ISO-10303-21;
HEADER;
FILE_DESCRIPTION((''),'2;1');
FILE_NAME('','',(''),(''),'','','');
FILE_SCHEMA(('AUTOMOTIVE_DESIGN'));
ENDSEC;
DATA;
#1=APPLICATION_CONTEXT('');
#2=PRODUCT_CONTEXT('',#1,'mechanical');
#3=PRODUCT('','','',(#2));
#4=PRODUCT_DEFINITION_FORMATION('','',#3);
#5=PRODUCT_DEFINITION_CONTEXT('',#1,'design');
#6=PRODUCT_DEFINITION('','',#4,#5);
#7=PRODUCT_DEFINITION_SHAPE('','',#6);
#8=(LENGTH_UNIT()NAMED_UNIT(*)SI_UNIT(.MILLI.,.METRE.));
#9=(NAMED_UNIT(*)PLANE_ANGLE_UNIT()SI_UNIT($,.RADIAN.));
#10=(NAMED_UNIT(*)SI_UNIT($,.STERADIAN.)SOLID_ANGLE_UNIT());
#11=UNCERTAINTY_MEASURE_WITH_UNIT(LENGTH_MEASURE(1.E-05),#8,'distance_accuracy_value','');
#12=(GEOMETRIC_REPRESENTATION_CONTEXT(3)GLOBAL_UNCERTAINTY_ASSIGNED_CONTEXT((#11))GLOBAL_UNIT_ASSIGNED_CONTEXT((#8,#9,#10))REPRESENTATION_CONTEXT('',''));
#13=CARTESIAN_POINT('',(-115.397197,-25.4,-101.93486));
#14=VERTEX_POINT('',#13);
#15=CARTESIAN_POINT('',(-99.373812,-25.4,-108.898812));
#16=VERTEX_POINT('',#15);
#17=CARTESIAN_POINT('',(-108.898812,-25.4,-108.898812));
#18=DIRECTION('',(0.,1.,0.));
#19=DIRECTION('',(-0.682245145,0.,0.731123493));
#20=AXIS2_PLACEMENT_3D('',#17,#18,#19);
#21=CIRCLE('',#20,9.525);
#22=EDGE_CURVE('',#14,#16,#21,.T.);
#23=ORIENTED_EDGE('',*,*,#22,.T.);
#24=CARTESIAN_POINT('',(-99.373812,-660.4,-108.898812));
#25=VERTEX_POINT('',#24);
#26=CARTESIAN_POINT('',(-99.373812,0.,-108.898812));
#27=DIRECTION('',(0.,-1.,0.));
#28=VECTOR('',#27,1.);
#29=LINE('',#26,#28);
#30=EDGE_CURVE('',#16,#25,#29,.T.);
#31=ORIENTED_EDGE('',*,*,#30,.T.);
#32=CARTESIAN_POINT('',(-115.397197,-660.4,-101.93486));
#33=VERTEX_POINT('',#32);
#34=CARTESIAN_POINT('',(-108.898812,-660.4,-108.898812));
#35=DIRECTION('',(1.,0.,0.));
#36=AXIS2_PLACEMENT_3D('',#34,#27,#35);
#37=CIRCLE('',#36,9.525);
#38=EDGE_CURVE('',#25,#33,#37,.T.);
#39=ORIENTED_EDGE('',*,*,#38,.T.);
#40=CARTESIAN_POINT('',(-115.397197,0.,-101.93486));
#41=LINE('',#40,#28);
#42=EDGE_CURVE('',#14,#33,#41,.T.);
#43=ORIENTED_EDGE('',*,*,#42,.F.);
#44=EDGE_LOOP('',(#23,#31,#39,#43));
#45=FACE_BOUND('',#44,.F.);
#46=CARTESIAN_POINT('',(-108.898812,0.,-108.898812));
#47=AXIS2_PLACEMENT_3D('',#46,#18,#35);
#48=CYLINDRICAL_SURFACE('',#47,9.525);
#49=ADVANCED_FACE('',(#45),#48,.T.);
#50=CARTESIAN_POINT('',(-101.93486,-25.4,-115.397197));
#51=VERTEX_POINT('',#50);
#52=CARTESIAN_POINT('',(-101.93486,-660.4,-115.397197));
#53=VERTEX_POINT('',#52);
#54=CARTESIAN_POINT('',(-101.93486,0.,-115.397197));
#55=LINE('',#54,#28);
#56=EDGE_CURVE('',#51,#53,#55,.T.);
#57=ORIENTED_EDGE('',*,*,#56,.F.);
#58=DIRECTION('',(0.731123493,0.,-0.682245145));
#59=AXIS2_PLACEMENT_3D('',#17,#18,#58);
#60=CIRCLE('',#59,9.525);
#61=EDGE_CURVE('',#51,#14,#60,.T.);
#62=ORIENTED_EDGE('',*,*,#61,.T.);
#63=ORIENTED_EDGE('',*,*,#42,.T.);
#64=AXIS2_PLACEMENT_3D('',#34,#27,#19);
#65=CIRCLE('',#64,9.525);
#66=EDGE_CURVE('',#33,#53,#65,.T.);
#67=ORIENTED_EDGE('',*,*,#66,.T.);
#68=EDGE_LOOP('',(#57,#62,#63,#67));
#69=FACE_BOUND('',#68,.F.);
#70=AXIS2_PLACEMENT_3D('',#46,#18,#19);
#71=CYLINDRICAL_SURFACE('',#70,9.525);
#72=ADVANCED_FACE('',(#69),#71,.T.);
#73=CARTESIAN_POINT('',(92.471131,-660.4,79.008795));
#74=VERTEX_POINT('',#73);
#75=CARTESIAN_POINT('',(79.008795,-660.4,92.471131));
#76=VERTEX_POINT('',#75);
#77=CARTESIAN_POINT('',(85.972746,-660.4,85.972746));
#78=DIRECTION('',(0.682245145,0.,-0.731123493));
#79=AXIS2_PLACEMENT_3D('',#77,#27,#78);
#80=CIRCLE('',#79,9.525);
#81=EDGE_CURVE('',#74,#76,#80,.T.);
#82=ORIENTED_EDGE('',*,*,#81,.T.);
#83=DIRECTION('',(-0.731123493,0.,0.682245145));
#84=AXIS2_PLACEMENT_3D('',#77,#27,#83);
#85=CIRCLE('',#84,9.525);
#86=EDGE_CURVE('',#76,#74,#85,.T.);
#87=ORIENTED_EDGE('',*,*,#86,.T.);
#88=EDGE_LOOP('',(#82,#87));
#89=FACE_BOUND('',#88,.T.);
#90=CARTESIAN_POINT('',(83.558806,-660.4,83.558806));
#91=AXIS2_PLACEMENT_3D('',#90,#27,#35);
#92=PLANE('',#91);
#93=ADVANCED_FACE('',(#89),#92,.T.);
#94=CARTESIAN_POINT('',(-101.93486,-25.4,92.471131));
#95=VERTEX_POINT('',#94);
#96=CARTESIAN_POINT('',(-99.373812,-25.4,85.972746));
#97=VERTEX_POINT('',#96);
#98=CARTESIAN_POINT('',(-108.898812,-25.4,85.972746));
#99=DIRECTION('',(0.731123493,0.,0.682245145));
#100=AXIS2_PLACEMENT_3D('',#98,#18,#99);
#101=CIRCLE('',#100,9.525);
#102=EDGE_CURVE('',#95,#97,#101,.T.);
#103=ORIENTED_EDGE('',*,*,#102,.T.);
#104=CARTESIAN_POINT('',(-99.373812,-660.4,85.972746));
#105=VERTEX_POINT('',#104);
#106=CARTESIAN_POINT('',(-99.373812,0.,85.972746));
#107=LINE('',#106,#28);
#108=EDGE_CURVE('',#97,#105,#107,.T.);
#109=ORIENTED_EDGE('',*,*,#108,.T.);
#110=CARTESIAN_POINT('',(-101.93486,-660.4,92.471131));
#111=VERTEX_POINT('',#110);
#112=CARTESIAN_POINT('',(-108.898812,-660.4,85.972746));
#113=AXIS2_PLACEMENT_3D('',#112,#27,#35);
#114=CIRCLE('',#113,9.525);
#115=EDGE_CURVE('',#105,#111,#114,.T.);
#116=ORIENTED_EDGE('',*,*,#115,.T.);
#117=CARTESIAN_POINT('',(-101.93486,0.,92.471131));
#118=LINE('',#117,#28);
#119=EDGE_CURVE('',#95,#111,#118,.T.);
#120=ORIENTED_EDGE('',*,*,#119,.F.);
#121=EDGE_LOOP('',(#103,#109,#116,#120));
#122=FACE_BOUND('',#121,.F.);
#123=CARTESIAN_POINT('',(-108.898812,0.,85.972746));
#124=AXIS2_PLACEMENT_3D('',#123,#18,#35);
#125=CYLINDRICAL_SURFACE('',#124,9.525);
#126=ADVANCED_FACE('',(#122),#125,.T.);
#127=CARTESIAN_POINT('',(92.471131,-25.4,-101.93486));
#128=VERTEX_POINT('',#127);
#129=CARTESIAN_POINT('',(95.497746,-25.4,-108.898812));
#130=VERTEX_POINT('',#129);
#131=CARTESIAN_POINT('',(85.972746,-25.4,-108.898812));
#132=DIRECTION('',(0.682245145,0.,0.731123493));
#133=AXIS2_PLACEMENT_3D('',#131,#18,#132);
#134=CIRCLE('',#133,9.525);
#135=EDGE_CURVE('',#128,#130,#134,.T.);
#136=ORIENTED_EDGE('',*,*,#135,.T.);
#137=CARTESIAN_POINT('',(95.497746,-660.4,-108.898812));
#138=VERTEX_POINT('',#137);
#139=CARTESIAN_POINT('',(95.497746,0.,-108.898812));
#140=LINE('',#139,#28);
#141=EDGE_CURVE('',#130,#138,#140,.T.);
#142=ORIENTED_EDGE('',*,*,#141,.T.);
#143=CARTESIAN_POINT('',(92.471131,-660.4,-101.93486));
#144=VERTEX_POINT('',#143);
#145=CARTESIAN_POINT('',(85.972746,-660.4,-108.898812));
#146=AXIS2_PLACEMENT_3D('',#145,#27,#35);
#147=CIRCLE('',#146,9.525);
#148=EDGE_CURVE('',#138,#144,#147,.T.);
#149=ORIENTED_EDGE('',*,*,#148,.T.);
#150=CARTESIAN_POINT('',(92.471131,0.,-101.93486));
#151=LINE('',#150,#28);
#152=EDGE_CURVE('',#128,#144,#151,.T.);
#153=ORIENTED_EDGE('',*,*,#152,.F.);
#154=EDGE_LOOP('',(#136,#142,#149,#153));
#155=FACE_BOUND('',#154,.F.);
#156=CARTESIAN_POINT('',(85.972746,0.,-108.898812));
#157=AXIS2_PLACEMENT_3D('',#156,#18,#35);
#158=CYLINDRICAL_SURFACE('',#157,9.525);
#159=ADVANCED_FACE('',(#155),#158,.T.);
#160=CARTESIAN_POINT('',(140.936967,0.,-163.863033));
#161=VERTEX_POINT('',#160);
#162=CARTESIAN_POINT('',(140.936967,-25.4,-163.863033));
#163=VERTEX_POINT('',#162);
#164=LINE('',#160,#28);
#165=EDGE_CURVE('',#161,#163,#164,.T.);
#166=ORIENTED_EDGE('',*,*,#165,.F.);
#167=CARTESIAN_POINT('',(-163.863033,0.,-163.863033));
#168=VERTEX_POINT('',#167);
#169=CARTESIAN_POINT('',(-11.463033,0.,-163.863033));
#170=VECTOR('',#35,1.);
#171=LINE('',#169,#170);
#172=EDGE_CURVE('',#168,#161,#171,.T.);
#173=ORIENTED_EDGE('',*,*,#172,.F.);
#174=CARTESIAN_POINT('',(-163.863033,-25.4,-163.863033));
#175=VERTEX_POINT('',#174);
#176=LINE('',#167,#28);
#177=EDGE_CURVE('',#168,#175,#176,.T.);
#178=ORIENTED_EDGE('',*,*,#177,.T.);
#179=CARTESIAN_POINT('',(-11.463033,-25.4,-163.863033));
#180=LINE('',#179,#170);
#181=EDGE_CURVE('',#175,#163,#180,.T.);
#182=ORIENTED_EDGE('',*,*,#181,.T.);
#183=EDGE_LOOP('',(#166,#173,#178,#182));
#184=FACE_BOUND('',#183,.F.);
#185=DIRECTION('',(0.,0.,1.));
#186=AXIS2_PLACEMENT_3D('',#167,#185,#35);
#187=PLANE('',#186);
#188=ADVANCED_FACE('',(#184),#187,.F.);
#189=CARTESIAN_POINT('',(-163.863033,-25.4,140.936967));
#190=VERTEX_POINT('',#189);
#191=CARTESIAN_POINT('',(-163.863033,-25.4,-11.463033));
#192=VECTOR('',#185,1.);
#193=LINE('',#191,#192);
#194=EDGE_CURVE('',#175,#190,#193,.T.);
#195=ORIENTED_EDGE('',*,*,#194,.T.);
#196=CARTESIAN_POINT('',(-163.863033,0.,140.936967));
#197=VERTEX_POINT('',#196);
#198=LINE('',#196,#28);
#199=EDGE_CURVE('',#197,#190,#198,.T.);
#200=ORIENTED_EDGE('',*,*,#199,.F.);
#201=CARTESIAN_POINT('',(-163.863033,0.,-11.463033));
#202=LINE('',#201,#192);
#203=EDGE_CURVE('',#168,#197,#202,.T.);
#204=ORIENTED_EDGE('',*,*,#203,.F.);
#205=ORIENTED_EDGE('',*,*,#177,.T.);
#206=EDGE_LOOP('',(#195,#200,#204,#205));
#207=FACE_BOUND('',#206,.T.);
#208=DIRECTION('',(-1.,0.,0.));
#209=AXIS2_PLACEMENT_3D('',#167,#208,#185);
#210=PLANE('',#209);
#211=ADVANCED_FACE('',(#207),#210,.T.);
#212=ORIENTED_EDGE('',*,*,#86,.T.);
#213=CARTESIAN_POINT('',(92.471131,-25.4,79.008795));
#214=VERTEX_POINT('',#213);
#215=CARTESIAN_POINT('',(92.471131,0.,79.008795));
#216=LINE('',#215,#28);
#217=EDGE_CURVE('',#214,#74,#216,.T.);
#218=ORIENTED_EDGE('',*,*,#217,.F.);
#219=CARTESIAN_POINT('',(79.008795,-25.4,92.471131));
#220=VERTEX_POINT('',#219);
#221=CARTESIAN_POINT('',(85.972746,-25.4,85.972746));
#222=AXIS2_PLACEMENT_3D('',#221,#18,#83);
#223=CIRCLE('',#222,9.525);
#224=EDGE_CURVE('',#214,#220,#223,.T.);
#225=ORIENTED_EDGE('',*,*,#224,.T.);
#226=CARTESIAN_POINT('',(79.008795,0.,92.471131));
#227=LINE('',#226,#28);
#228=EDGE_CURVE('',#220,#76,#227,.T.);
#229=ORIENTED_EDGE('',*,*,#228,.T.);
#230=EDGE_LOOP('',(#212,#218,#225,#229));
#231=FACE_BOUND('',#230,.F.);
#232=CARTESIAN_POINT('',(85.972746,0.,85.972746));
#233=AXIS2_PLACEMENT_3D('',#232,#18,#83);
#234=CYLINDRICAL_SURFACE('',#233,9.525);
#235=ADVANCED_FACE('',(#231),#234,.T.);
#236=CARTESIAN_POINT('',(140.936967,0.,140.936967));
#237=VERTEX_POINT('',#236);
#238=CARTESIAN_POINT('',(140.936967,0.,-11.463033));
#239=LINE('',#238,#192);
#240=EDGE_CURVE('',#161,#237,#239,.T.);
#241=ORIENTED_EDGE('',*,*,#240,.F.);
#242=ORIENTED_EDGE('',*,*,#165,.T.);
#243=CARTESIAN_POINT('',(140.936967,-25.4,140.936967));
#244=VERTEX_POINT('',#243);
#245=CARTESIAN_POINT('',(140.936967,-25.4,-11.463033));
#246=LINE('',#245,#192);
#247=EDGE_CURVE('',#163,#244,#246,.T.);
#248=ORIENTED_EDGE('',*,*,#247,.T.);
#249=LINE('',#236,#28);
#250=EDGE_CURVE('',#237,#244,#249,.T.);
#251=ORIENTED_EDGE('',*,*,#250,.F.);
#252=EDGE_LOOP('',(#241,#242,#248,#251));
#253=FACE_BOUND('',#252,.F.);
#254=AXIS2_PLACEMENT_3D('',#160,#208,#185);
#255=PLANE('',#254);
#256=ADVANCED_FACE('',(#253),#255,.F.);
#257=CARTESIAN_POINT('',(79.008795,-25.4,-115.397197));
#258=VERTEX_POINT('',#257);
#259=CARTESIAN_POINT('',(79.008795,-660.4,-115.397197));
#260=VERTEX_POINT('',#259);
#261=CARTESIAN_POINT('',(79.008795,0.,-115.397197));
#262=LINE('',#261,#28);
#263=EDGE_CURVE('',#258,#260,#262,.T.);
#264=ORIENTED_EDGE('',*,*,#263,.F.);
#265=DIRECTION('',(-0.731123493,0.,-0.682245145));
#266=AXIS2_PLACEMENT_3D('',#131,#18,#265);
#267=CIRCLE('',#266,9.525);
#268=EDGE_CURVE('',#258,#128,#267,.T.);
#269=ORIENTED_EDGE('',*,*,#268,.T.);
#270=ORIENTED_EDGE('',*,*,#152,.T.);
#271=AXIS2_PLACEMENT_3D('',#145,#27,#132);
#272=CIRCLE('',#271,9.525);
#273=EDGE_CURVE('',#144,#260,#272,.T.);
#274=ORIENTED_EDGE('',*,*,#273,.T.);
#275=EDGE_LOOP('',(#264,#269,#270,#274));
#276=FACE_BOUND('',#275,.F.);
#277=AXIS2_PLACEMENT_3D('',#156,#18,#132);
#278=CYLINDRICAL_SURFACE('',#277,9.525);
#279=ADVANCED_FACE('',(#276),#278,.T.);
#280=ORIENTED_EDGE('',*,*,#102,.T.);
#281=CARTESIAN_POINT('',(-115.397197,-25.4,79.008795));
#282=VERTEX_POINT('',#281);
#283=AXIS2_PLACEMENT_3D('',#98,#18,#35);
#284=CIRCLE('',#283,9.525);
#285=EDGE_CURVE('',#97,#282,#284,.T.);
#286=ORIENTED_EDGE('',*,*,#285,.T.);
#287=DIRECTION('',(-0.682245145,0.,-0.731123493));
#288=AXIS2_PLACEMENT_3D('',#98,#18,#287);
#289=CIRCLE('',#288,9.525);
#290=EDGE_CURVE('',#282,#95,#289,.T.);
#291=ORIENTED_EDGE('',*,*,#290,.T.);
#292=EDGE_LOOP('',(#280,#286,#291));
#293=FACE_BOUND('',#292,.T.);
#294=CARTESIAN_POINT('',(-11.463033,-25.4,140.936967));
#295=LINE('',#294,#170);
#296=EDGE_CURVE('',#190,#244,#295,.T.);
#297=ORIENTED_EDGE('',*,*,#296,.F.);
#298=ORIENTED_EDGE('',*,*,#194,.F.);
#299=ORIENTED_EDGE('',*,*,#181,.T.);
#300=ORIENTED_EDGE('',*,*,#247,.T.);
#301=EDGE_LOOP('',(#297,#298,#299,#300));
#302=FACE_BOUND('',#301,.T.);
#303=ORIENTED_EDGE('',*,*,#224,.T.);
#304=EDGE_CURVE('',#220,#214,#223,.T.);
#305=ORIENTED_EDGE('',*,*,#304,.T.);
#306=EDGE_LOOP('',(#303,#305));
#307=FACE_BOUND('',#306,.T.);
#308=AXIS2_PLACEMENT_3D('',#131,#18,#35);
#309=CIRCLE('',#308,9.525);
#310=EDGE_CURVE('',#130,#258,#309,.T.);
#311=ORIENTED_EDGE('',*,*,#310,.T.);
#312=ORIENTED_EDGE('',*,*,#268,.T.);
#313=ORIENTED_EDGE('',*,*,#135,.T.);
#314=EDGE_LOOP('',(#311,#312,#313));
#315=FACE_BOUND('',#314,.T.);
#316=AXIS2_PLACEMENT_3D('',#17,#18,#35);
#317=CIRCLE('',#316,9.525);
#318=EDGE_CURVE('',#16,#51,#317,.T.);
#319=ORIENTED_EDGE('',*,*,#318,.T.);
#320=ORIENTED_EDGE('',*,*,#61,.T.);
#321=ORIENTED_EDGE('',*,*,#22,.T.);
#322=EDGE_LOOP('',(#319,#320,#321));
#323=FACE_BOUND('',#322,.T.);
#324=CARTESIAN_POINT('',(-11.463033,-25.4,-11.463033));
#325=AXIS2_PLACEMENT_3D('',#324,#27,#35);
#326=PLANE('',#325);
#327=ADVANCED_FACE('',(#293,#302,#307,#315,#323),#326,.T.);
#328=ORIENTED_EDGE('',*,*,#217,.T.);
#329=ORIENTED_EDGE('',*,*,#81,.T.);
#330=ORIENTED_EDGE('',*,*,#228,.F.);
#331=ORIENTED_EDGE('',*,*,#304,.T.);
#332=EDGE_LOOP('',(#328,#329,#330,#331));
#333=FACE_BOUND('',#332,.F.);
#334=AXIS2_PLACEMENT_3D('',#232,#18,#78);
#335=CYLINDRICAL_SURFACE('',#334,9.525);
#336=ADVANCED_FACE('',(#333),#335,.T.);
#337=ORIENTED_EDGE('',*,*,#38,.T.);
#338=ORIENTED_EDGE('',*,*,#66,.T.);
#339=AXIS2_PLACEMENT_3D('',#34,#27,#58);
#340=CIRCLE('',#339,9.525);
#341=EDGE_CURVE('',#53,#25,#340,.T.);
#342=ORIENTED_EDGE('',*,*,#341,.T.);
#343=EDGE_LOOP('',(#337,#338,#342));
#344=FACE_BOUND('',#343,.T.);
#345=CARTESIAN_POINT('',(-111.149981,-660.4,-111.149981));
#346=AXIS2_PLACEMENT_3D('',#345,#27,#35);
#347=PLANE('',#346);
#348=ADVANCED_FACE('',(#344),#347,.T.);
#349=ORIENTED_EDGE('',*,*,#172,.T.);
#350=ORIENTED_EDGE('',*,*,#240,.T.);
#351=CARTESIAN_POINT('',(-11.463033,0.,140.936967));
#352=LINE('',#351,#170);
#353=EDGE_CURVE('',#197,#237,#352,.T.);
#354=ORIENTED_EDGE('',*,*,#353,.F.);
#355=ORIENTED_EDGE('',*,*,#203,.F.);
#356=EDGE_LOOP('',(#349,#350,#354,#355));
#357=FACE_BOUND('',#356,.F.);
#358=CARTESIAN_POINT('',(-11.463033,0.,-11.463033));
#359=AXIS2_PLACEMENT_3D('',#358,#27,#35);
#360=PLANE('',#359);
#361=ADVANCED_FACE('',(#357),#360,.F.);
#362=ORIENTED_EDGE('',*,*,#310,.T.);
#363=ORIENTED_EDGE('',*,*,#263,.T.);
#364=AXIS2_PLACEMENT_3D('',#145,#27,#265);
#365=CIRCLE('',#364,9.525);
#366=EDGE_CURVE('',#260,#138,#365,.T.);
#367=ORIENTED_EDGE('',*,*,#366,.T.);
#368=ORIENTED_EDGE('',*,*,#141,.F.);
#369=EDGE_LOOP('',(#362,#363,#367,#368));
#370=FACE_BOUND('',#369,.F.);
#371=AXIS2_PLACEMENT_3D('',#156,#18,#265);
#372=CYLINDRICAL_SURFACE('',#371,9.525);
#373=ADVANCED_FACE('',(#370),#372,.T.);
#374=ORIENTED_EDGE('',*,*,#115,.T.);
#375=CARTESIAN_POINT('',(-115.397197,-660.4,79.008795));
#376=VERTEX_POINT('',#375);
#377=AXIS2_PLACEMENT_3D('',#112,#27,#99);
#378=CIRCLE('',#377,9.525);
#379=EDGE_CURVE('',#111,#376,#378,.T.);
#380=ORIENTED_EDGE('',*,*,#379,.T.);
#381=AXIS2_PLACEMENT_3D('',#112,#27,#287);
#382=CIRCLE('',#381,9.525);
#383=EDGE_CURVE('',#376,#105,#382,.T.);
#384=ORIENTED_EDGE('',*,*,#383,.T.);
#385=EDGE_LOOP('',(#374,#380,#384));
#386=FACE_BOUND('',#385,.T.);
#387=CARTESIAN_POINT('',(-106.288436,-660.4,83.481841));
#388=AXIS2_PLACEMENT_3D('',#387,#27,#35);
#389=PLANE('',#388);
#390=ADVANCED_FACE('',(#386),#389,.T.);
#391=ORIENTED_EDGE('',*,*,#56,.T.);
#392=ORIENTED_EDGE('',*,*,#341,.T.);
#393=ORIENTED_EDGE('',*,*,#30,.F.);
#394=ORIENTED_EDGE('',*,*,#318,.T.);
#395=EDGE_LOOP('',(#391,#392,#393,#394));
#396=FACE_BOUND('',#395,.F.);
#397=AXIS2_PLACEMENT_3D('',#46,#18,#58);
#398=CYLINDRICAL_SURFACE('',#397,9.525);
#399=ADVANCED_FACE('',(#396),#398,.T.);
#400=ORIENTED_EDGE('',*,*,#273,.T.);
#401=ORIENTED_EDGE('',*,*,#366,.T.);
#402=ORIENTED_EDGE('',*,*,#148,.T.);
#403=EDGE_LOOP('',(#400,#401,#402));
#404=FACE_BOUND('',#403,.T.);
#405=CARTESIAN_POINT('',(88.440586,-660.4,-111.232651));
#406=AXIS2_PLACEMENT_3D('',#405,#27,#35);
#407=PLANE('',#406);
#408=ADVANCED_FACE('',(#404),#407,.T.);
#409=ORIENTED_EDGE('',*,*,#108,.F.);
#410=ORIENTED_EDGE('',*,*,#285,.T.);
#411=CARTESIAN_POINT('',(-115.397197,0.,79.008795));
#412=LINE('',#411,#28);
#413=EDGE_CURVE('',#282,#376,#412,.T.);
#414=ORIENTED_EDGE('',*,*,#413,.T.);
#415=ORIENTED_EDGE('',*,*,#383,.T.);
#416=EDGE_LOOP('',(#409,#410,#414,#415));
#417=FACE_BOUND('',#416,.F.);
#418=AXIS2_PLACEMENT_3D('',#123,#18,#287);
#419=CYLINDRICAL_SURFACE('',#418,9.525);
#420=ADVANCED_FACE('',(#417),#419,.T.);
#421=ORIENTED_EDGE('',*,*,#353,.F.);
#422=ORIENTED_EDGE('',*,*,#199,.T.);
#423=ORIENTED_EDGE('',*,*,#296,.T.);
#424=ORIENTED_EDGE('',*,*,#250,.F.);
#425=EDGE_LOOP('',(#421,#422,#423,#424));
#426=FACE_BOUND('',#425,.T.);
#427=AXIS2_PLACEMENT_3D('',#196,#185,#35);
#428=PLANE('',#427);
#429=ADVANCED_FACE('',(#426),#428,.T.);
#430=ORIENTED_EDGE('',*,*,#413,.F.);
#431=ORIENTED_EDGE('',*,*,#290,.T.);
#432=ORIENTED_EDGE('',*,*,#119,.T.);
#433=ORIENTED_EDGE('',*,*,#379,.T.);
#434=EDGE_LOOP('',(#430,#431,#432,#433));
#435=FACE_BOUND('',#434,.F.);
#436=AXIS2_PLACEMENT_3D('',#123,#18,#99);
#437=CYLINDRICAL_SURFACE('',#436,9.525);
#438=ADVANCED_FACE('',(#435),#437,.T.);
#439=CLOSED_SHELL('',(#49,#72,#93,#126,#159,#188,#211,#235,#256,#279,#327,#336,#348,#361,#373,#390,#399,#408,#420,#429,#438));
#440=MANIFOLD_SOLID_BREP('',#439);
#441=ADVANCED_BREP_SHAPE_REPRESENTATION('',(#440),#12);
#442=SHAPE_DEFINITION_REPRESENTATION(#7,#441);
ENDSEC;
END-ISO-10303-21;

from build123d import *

# Parameters (mm, degrees)
F0_W     = 304.8
F0_H     = 304.8
F1_DEPTH = 25.4
F2_DEPTH = 660.4


with BuildPart() as f1:
    # F0 (on Front) → F1 (new body)
    with BuildSketch(Plane.XZ):
        with Locations((-11.4630328134, -11.4630328134)):
            Rectangle(F0_W, F0_H)
        with BuildLine():
            ThreePointArc((92.4711311021, 79.0087948248), (117.5894180385, 36.8373497331), (126.3319671866, -11.4630328134))
            ThreePointArc((126.3319671866, -11.4630328134), (117.5894180385, -59.7634153598), (92.4711311021, -101.9348604515))
            ThreePointArc((92.4711311021, -101.9348604515), (94.708384089, -105.1022008793), (95.4977461002, -108.898811727))
            ThreePointArc((95.4977461002, -108.898811727), (89.4651656842, -117.7604498627), (79.0087948248, -115.3971967289))
            ThreePointArc((79.0087948248, -115.3971967289), (-11.4630328134, -149.2580328134), (-101.9348604515, -115.3971967289))
            ThreePointArc((-101.9348604515, -115.3971967289), (-115.6340038178, -115.6340038178), (-115.3971967289, -101.9348604515))
            ThreePointArc((-115.3971967289, -101.9348604515), (-149.2580328134, -11.4630328134), (-115.3971967289, 79.0087948248))
            ThreePointArc((-115.3971967289, 79.0087948248), (-115.6340038178, 92.707938191), (-101.9348604515, 92.4711311021))
            ThreePointArc((-101.9348604515, 92.4711311021), (-11.4630328134, 126.3319671866), (79.0087948248, 92.4711311021))
            ThreePointArc((79.0087948248, 92.4711311021), (89.4651656842, 94.834384236), (95.4977461002, 85.9727461002))
            ThreePointArc((95.4977461002, 85.9727461002), (94.708384089, 82.1761352526), (92.4711311021, 79.0087948248))
        make_face(mode=Mode.SUBTRACT)
        with BuildLine():
            ThreePointArc((92.4711311021, -101.9348604515), (117.5894180385, -59.7634153598), (126.3319671866, -11.4630328134))
            ThreePointArc((126.3319671866, -11.4630328134), (117.5894180385, 36.8373497331), (92.4711311021, 79.0087948248))
            ThreePointArc((92.4711311021, 79.0087948248), (79.2375540094, 79.2375540094), (79.0087948248, 92.4711311021))
            ThreePointArc((79.0087948248, 92.4711311021), (-11.4630328134, 126.3319671866), (-101.9348604515, 92.4711311021))
            ThreePointArc((-101.9348604515, 92.4711311021), (-100.0371735912, 89.4651656842), (-99.373811727, 85.9727461002))
            ThreePointArc((-99.373811727, 85.9727461002), (-105.1022008793, 77.2371081114), (-115.3971967289, 79.0087948248))
            ThreePointArc((-115.3971967289, 79.0087948248), (-149.2580328134, -11.4630328134), (-115.3971967289, -101.9348604515))
            ThreePointArc((-115.3971967289, -101.9348604515), (-105.1022008793, -100.1631737382), (-99.373811727, -108.898811727))
            ThreePointArc((-99.373811727, -108.898811727), (-100.0371735912, -112.391231311), (-101.9348604515, -115.3971967289))
            ThreePointArc((-101.9348604515, -115.3971967289), (-11.4630328134, -149.2580328134), (79.0087948248, -115.3971967289))
            ThreePointArc((79.0087948248, -115.3971967289), (79.2375540094, -102.1636196362), (92.4711311021, -101.9348604515))
        make_face()
        with BuildLine():
            ThreePointArc((79.0087948248, 92.4711311021), (79.2375540094, 79.2375540094), (92.4711311021, 79.0087948248))
            ThreePointArc((92.4711311021, 79.0087948248), (85.9727461002, 85.9727461002), (79.0087948248, 92.4711311021))
        make_face()
    extrude(amount=F1_DEPTH)

    # F0 (on Front) → F2 (join)
    with BuildSketch(Plane.XZ):
        with BuildLine():
            ThreePointArc((79.0087948248, 92.4711311021), (79.2375540094, 79.2375540094), (92.4711311021, 79.0087948248))
            ThreePointArc((92.4711311021, 79.0087948248), (85.9727461002, 85.9727461002), (79.0087948248, 92.4711311021))
        make_face()
        with BuildLine():
            ThreePointArc((79.0087948248, 92.4711311021), (85.9727461002, 85.9727461002), (92.4711311021, 79.0087948248))
            ThreePointArc((92.4711311021, 79.0087948248), (94.708384089, 82.1761352526), (95.4977461002, 85.9727461002))
            ThreePointArc((95.4977461002, 85.9727461002), (89.4651656842, 94.834384236), (79.0087948248, 92.4711311021))
        make_face()
        with BuildLine():
            ThreePointArc((95.4977461002, -108.898811727), (94.708384089, -105.1022008793), (92.4711311021, -101.9348604515))
            ThreePointArc((92.4711311021, -101.9348604515), (85.9727461002, -108.898811727), (79.0087948248, -115.3971967289))
            ThreePointArc((79.0087948248, -115.3971967289), (89.4651656842, -117.7604498627), (95.4977461002, -108.898811727))
        make_face()
        with BuildLine():
            ThreePointArc((79.0087948248, -115.3971967289), (85.9727461002, -108.898811727), (92.4711311021, -101.9348604515))
            ThreePointArc((92.4711311021, -101.9348604515), (79.2375540094, -102.1636196362), (79.0087948248, -115.3971967289))
        make_face()
        with BuildLine():
            ThreePointArc((-99.373811727, 85.9727461002), (-100.0371735912, 89.4651656842), (-101.9348604515, 92.4711311021))
            ThreePointArc((-101.9348604515, 92.4711311021), (-108.898811727, 85.9727461002), (-115.3971967289, 79.0087948248))
            ThreePointArc((-115.3971967289, 79.0087948248), (-105.1022008793, 77.2371081114), (-99.373811727, 85.9727461002))
        make_face()
        with BuildLine():
            ThreePointArc((-115.3971967289, 79.0087948248), (-108.898811727, 85.9727461002), (-101.9348604515, 92.4711311021))
            ThreePointArc((-101.9348604515, 92.4711311021), (-115.6340038178, 92.707938191), (-115.3971967289, 79.0087948248))
        make_face()
        with BuildLine():
            ThreePointArc((-115.3971967289, -101.9348604515), (-115.6340038178, -115.6340038178), (-101.9348604515, -115.3971967289))
            ThreePointArc((-101.9348604515, -115.3971967289), (-108.898811727, -108.898811727), (-115.3971967289, -101.9348604515))
        make_face()
        with BuildLine():
            ThreePointArc((-115.3971967289, -101.9348604515), (-108.898811727, -108.898811727), (-101.9348604515, -115.3971967289))
            ThreePointArc((-101.9348604515, -115.3971967289), (-100.0371735912, -112.391231311), (-99.373811727, -108.898811727))
            ThreePointArc((-99.373811727, -108.898811727), (-105.1022008793, -100.1631737382), (-115.3971967289, -101.9348604515))
        make_face()
    extrude(amount=F2_DEPTH)


solid = f1.part
